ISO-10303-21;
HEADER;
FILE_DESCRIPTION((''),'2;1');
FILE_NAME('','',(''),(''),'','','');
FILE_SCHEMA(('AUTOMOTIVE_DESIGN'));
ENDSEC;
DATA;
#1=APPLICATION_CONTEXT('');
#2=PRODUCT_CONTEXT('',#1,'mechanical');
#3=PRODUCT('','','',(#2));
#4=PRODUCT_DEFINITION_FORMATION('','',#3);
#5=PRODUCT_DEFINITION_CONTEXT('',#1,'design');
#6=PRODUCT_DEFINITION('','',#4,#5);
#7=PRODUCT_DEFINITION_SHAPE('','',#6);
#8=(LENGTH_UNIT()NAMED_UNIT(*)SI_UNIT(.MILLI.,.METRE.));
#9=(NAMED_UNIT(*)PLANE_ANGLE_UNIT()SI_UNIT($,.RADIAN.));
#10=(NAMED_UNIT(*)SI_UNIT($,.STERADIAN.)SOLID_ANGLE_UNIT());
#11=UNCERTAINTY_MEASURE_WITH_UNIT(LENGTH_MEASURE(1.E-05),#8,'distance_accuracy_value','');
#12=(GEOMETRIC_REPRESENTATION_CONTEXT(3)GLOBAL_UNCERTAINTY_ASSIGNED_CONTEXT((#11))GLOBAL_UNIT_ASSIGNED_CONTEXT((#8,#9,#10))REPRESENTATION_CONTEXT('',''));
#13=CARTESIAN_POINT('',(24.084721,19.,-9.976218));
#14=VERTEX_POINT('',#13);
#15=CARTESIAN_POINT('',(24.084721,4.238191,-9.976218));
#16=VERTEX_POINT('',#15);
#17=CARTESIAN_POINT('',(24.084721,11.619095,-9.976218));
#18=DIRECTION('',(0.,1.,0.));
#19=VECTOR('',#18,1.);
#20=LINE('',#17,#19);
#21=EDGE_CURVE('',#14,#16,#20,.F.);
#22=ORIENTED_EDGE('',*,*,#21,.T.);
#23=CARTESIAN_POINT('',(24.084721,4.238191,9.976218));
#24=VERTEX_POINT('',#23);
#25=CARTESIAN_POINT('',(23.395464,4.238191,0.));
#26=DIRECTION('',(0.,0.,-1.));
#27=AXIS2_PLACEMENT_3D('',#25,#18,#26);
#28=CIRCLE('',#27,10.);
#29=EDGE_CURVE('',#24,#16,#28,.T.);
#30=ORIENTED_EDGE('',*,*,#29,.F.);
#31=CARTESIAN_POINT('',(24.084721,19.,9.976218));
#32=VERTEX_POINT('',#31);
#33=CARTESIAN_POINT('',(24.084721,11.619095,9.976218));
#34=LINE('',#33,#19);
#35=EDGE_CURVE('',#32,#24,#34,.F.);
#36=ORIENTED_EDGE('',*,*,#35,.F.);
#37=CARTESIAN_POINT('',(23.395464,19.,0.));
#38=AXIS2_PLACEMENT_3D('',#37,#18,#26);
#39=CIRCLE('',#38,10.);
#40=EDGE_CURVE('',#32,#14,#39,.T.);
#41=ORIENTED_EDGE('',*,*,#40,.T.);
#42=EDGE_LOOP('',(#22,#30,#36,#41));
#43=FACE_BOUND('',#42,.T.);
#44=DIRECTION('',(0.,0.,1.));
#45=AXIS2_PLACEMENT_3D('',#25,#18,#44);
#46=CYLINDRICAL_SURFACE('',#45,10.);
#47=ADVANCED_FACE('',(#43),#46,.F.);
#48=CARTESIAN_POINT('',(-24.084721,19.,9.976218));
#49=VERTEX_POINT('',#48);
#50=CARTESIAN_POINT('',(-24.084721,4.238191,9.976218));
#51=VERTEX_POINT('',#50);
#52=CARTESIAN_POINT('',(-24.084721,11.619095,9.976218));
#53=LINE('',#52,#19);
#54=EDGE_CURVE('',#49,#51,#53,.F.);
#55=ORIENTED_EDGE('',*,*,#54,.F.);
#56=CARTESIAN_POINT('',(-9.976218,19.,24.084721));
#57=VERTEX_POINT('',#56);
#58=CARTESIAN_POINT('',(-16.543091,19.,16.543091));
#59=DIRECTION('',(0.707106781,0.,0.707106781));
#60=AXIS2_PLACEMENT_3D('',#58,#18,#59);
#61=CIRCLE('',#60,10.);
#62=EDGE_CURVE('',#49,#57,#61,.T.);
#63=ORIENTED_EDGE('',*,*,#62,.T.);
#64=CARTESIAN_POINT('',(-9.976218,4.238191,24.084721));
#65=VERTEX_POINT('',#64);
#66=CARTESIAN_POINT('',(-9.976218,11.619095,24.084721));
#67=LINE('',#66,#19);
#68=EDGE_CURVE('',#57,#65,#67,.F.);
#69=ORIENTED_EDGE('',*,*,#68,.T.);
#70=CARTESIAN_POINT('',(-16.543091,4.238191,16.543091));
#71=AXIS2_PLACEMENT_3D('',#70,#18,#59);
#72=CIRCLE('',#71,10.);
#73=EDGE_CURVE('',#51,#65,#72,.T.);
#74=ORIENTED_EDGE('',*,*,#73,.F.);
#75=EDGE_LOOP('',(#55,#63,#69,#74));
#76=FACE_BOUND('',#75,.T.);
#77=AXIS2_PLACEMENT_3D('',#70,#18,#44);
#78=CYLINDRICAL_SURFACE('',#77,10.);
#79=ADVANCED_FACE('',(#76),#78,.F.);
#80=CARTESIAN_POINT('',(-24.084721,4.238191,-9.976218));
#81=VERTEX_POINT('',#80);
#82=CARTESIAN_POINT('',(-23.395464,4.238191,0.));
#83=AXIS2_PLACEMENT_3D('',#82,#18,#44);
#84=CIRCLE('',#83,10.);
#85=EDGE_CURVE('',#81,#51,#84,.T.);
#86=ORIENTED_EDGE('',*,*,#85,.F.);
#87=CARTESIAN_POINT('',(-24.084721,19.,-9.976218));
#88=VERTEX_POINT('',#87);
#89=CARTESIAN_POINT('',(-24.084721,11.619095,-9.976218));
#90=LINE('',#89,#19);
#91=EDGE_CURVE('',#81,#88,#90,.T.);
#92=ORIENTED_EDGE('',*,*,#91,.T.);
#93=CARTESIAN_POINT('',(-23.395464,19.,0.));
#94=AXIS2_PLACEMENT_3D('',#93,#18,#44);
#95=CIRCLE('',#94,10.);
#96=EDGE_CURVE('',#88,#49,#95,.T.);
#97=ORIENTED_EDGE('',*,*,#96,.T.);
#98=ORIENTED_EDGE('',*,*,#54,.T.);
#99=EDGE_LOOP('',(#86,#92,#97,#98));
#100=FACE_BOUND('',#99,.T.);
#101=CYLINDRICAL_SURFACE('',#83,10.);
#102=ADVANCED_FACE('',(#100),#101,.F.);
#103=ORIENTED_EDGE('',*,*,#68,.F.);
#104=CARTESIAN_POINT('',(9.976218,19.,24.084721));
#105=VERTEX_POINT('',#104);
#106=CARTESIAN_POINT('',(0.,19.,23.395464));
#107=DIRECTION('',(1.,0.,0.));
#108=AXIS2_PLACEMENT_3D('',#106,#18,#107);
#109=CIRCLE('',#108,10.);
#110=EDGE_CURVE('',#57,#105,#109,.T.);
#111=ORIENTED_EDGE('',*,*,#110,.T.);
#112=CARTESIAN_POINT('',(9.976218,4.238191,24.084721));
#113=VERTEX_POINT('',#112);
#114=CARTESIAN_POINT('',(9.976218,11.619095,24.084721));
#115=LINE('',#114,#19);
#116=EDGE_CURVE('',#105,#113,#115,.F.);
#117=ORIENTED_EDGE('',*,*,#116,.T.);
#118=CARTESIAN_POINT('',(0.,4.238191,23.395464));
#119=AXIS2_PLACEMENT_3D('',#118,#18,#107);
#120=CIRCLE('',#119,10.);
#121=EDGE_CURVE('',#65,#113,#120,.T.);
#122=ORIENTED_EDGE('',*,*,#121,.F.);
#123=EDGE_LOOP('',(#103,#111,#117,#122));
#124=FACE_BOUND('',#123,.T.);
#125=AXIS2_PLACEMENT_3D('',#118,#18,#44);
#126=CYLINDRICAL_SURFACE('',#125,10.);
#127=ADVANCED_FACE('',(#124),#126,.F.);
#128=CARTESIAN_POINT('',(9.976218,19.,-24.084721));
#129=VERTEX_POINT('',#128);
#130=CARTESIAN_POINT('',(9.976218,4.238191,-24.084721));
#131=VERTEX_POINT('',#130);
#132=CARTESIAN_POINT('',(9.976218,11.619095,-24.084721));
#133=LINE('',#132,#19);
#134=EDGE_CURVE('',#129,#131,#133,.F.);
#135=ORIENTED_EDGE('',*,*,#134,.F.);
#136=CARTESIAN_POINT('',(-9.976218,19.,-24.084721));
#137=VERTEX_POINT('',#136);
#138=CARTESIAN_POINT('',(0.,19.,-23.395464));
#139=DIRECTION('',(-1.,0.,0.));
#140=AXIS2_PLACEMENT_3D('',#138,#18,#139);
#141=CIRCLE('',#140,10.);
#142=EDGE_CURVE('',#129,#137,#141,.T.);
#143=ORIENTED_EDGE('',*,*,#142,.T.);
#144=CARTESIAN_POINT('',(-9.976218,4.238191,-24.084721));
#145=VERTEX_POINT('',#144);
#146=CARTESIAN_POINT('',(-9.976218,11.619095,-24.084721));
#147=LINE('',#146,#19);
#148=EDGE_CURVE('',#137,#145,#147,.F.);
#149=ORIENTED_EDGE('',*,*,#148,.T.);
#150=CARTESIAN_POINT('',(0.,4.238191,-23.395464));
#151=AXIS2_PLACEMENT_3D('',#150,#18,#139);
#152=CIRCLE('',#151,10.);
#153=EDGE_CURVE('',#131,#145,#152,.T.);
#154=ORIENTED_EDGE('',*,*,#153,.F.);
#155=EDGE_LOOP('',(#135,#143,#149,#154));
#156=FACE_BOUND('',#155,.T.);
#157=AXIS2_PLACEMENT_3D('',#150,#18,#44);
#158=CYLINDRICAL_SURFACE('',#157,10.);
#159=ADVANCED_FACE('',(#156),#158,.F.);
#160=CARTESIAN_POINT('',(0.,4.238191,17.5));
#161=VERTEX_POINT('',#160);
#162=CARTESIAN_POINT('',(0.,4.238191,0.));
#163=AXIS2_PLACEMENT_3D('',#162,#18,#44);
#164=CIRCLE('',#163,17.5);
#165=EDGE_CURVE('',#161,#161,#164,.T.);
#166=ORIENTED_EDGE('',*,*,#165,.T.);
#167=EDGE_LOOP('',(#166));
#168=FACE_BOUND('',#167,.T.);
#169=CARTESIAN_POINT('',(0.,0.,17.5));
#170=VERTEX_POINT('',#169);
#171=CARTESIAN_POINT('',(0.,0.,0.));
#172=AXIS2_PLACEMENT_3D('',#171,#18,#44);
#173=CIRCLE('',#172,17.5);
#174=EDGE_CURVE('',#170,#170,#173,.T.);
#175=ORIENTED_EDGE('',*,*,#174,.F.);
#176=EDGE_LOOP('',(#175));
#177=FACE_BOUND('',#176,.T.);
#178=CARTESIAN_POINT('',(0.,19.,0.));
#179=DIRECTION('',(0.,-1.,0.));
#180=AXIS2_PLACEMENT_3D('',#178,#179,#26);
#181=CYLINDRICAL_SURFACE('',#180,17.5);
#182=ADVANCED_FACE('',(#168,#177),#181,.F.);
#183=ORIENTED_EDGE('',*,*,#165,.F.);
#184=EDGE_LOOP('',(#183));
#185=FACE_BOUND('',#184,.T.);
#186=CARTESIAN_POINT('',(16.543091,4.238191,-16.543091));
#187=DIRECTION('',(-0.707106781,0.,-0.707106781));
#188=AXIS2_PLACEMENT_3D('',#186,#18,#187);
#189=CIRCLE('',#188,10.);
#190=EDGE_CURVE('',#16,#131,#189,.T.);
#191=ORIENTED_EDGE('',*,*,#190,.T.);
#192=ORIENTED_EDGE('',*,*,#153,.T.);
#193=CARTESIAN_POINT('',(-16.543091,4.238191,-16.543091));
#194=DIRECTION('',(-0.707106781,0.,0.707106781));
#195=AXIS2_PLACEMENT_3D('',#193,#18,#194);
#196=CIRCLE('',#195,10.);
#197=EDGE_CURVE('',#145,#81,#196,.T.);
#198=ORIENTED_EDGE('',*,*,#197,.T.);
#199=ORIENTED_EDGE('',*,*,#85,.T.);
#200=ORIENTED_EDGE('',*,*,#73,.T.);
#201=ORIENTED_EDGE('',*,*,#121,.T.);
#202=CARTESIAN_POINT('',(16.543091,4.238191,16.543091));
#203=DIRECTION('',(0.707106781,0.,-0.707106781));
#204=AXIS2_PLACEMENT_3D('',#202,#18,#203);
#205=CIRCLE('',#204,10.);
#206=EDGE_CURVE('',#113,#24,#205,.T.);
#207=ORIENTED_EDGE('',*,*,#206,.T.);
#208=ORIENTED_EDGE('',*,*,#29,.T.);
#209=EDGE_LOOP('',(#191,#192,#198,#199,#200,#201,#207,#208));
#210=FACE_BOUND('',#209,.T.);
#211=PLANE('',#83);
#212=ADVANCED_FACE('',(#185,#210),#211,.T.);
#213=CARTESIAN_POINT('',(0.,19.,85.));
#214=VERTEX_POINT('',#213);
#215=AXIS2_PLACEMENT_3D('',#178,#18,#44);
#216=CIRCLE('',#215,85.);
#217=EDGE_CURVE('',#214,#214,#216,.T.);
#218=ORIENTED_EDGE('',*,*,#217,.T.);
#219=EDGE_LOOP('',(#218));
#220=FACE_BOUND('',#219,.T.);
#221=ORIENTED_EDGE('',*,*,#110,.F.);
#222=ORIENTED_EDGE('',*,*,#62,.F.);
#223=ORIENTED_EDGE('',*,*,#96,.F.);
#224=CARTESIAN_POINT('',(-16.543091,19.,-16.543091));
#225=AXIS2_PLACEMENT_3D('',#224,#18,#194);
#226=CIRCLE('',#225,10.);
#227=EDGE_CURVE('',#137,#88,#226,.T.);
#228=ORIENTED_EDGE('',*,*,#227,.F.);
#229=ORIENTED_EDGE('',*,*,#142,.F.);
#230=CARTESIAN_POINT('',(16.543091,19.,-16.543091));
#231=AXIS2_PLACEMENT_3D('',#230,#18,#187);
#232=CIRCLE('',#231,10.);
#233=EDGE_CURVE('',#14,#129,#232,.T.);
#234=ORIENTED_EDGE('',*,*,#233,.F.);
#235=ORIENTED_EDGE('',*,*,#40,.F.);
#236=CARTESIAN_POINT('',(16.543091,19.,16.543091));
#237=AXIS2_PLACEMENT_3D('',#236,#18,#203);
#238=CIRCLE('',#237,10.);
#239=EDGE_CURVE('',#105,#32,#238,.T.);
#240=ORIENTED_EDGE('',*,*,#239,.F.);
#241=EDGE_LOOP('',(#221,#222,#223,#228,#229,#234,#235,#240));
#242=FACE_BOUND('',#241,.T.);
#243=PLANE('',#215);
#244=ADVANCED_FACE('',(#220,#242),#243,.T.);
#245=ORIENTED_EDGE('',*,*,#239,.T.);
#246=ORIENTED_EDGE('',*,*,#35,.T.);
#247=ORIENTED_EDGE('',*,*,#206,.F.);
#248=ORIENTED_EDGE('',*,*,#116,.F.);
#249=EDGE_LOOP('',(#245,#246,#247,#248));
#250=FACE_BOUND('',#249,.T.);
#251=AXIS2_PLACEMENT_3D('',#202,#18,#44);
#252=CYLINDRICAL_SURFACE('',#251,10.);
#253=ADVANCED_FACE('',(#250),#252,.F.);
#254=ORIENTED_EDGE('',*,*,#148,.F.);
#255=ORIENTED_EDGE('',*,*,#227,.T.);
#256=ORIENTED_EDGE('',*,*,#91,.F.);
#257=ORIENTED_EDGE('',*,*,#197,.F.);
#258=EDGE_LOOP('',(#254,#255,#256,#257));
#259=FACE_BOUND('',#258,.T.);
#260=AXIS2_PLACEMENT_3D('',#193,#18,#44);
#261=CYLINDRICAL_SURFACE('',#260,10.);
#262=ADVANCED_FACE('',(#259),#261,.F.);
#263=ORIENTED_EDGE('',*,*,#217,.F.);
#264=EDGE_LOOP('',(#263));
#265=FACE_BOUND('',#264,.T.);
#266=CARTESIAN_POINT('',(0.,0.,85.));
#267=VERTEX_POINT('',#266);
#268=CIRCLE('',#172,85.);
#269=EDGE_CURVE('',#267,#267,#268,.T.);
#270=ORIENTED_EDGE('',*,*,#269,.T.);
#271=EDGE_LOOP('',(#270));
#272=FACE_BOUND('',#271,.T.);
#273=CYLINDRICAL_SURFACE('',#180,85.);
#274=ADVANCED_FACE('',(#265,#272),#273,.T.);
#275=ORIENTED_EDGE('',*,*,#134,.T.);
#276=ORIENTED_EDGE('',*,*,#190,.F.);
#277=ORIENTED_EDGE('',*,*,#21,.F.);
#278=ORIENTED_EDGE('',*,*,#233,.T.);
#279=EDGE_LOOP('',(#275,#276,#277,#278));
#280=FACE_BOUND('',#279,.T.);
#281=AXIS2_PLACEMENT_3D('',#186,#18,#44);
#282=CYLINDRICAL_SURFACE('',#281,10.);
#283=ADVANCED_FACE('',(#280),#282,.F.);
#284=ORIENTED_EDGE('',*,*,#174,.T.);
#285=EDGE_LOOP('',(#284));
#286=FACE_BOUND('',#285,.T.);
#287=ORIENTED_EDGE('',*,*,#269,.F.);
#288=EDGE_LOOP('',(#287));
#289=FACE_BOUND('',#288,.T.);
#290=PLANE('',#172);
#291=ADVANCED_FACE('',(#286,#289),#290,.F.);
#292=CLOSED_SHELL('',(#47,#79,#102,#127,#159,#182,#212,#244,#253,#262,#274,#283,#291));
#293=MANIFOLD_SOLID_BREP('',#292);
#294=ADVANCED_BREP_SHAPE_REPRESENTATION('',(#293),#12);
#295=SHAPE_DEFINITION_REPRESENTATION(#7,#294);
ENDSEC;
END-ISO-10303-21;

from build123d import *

# Parameters (mm, degrees)
SKETCH1_R           = 85
BOSS_EXTRUDE1_DEPTH = 19
SKETCH2_R           = 17.5
CUT_EXTRUDE1_DEPTH  = 122.70045193
SKETCH3_R           = 10
CUT_EXTRUDE2_DEPTH  = 14.761809073
CIRPATTERN1_COUNT   = 8


with BuildPart() as part:
    # Sketch1 → Boss-Extrude1 (new body)
    with BuildSketch(Plane(origin=(0, 0, 0), x_dir=(1, 0, 0), z_dir=(0, 1, 0))):
        Circle(SKETCH1_R)
    extrude(amount=BOSS_EXTRUDE1_DEPTH)

    # Sketch2 → Cut-Extrude1 (cut, through all)
    with BuildSketch(Plane(origin=(0, 0, 0), x_dir=(1, 0, 0), z_dir=(0, 1, 0))):
        Circle(SKETCH2_R)
    extrude(amount=CUT_EXTRUDE1_DEPTH, mode=Mode.SUBTRACT)

    # Sketch3 → Cut-Extrude2 (cut)
    with BuildSketch(Plane(origin=(0, 19, 0), x_dir=(1, 0, 0), z_dir=(0, 1, 0))):
        with Locations((-23.395464248, 0)):
            Circle(SKETCH3_R)
    cut_extrude2 = extrude(amount=-CUT_EXTRUDE2_DEPTH, mode=Mode.SUBTRACT)

    # CirPattern1: Cut-Extrude2 ×8 about axis
    cirpattern1_axis = Axis((0, 0, 0), (0, 1, 0))
    for i in range(1, CIRPATTERN1_COUNT):
        add(cut_extrude2.rotate(cirpattern1_axis, i * 360 / CIRPATTERN1_COUNT), mode=Mode.SUBTRACT)


solid = part.part
